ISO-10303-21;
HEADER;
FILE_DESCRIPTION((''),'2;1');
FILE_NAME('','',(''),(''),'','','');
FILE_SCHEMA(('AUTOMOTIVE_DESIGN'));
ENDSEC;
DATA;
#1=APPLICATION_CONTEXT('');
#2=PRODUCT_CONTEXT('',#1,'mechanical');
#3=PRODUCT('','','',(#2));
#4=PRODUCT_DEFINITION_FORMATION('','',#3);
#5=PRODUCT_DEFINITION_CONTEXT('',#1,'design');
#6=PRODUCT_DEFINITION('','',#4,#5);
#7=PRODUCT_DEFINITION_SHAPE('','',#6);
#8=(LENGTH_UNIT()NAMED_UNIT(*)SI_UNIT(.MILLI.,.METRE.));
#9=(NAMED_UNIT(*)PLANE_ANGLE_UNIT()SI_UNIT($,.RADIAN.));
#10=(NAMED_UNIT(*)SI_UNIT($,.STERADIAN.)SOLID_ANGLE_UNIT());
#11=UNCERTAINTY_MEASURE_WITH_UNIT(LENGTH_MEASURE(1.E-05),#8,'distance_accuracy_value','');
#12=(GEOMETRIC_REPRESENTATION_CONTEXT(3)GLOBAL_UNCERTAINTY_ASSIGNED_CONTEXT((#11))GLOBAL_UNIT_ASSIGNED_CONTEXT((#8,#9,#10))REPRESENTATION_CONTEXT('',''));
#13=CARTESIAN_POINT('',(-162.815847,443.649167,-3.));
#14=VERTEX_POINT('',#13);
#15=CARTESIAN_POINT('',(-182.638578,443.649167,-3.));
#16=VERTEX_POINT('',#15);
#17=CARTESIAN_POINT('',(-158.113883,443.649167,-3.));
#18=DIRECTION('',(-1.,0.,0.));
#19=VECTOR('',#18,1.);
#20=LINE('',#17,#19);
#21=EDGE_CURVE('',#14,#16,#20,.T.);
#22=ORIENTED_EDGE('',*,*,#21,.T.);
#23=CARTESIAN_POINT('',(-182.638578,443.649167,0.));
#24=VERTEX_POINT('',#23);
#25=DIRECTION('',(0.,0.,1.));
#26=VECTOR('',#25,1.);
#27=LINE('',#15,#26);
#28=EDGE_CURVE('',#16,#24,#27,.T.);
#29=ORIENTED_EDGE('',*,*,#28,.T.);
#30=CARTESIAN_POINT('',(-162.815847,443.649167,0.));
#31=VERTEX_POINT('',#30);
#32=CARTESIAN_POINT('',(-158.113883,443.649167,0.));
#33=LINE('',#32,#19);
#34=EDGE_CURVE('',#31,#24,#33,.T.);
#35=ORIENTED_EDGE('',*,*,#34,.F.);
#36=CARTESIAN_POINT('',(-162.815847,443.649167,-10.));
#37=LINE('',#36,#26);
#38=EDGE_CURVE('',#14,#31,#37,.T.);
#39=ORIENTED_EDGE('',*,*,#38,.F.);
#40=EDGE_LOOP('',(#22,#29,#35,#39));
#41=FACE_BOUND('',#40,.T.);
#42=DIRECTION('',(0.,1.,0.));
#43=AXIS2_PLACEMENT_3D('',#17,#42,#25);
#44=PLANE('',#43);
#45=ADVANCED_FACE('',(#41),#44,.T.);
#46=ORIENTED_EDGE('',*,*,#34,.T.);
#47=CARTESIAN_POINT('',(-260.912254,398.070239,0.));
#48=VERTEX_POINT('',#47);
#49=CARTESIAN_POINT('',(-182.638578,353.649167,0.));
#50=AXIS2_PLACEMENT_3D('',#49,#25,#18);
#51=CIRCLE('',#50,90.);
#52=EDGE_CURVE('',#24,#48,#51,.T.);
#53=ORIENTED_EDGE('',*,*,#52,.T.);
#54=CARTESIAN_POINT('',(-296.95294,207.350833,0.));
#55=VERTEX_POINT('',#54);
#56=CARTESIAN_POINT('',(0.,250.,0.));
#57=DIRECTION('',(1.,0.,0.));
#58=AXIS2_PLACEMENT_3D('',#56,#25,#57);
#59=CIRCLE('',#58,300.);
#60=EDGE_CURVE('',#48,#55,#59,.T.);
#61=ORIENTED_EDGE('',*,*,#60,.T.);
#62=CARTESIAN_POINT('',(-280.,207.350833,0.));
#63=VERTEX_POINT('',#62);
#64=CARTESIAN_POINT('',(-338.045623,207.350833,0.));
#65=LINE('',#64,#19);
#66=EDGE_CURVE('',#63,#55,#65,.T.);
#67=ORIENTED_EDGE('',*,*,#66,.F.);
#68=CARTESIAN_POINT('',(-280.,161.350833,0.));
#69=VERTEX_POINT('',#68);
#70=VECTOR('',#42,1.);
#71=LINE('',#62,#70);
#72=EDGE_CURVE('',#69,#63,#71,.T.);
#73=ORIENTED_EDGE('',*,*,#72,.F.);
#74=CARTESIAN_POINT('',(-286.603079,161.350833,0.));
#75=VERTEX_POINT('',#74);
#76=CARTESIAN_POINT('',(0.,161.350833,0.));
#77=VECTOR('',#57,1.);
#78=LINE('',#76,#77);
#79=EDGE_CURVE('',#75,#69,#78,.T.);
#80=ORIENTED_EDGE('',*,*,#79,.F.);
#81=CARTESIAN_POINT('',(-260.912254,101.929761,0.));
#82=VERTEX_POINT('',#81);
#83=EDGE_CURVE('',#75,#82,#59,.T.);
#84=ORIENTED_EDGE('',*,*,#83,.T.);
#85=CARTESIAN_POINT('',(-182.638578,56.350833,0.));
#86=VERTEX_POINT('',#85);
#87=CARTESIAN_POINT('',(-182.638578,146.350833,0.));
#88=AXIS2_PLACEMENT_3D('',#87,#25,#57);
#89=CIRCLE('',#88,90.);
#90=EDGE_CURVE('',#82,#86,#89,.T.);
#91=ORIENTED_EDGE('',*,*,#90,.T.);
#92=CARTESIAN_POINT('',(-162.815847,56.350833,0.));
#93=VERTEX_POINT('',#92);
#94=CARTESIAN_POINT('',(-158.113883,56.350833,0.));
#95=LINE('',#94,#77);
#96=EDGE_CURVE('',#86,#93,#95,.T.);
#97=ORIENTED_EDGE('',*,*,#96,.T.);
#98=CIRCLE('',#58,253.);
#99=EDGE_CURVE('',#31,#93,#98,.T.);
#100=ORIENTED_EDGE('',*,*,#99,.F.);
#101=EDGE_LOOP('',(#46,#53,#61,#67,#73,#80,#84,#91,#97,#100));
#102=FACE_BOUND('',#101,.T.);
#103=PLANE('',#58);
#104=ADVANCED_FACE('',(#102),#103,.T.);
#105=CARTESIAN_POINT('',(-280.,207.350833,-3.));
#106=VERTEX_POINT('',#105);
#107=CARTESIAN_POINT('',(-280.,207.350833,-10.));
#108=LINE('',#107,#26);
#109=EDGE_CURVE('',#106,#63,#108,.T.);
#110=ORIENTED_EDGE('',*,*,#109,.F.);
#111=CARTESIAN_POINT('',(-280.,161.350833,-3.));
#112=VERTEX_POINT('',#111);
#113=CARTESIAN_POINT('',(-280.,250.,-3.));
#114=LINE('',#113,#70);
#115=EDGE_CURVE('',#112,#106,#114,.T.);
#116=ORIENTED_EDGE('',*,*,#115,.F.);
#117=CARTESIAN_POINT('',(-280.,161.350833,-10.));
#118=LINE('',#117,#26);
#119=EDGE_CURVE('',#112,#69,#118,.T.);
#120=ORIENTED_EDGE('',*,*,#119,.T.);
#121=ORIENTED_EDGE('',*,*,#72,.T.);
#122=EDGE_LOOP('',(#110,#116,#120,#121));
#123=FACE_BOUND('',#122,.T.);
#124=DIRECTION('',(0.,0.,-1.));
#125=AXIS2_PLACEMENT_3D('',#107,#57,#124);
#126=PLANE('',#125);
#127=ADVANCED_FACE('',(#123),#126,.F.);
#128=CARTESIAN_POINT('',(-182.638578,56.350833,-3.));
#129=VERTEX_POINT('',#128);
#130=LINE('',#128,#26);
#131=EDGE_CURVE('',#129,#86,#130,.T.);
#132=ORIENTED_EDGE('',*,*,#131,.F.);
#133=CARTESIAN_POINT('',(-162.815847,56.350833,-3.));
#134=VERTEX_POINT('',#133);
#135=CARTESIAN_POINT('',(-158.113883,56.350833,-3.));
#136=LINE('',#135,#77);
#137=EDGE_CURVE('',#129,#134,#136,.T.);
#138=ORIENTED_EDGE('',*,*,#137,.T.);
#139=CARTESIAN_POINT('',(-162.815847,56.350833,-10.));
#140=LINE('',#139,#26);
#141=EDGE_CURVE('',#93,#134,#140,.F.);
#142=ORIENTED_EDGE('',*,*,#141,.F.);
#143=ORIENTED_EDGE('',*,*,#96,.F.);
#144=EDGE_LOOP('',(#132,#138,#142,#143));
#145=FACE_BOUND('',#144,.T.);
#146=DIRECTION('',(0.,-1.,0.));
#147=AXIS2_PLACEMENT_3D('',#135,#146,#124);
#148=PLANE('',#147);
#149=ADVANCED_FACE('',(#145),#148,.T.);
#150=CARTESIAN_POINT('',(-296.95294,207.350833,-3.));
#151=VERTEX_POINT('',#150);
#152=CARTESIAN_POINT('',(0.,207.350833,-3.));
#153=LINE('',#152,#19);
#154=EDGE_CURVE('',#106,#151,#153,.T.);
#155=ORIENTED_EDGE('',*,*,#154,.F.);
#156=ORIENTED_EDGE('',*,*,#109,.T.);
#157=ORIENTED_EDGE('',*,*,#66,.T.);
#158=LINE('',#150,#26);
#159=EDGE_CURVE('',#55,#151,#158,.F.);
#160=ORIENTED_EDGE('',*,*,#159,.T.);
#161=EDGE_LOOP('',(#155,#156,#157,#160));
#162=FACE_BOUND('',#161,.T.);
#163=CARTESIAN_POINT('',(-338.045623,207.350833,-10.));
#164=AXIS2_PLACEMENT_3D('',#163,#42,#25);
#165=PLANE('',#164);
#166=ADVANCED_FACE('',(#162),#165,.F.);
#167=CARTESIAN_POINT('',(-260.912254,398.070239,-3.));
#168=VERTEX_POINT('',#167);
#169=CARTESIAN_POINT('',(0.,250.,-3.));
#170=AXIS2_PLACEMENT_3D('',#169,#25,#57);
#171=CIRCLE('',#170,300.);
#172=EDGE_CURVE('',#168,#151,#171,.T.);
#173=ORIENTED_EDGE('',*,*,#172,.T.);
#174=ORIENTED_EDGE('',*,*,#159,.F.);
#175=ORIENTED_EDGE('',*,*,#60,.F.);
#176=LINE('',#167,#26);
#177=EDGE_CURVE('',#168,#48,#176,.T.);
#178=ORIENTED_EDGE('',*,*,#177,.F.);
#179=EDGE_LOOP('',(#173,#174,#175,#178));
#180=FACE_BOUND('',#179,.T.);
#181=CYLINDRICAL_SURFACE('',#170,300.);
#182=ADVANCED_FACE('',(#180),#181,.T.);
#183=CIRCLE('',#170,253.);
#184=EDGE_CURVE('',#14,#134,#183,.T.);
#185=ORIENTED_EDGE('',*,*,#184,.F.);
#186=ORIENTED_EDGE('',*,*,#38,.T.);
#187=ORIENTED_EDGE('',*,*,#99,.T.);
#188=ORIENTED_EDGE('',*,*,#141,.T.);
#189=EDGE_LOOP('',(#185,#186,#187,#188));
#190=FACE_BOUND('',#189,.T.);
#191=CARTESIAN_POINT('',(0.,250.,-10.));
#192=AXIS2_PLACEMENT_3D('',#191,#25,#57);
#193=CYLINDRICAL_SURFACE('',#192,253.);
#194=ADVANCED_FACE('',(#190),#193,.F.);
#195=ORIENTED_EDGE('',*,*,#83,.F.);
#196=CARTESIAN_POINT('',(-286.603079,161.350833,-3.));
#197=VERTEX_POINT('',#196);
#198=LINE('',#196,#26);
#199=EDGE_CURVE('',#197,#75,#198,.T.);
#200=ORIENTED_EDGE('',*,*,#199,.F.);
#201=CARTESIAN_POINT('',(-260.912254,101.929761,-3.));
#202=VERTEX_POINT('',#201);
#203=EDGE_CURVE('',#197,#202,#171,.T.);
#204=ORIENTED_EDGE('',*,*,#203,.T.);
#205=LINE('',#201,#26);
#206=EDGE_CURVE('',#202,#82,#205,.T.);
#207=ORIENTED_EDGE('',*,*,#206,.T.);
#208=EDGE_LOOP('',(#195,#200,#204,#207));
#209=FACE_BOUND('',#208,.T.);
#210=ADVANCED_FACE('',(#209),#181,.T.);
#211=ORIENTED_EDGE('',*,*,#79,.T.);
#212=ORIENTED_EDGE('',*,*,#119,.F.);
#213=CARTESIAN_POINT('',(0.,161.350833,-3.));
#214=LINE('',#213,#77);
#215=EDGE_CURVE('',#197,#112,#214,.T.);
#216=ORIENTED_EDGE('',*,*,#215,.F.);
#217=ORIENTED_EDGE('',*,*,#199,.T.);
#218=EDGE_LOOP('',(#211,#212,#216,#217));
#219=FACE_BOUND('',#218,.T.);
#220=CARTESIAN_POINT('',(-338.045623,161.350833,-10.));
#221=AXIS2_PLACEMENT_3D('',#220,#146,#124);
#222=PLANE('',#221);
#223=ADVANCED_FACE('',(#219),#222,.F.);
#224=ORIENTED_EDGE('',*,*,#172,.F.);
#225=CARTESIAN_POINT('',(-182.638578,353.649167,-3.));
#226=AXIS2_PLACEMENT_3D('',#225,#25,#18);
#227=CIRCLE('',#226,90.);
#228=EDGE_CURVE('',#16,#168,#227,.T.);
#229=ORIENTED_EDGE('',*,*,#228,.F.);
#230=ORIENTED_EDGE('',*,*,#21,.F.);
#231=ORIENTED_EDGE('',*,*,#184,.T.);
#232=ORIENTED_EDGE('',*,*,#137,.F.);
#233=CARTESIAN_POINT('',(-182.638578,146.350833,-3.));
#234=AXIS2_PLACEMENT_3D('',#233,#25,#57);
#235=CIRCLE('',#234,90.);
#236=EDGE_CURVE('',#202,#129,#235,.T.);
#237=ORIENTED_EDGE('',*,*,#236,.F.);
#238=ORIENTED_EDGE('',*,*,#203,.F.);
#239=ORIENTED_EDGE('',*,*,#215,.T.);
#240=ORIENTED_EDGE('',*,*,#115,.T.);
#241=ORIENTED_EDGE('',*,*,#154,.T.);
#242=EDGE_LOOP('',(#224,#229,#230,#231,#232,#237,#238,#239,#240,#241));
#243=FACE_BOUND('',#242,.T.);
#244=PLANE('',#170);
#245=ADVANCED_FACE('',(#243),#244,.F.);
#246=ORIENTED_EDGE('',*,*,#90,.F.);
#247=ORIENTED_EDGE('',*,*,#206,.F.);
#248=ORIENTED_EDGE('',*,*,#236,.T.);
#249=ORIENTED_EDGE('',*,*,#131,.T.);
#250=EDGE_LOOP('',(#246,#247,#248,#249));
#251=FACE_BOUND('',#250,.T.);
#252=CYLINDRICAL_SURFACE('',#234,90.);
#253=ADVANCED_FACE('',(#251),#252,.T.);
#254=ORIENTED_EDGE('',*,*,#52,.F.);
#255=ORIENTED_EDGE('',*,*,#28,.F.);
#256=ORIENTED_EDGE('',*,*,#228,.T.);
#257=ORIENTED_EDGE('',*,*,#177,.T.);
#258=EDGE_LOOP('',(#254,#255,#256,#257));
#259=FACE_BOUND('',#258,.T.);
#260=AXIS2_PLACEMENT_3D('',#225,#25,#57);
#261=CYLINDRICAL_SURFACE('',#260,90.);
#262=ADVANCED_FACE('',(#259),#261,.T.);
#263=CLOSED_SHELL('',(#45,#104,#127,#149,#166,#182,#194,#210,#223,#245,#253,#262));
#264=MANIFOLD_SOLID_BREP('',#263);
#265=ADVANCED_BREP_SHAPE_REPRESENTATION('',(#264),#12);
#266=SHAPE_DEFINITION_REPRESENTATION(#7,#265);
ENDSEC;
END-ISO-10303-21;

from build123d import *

# Parameters (mm, degrees)
FLANGE_BASE1_START    = -3
FLANGE_BASE1_DEPTH    = 3
ESBO_O2_W             = 58.045623223
ESBO_O2_H             = 46
CORTE_EXTRUS_O1_DEPTH = 10
CORTE_EXTRUS_O2_START = -10
CORTE_EXTRUS_O2_DEPTH = 10


# Read off the part's stored shape, not the designer's step: Flange-base1
with BuildPart() as part:
    # Flange-base1 outline → Flange-base1 (new body)
    with BuildSketch(Plane.XY.offset(FLANGE_BASE1_START)):
        with BuildLine():
            ThreePointArc((-158.113883008, 56.35083269), (-250, 250), (-158.113883008, 443.64916731))
            Line((-158.113883008, 443.64916731), (-182.638577841, 443.64916731))
            ThreePointArc((-182.638577841, 443.64916731), (-227.927116936, 431.424151892), (-260.912254059, 398.070239015))
            ThreePointArc((-260.912254059, 398.070239015), (-300, 250), (-260.912254059, 101.929760985))
            ThreePointArc((-260.912254059, 101.929760985), (-227.927116936, 68.575848108), (-182.638577841, 56.35083269))
            Line((-182.638577841, 56.35083269), (-158.113883008, 56.35083269))
        make_face()
    extrude(amount=FLANGE_BASE1_DEPTH)

    # Esboço2 → Corte-extrusão1 (cut)
    with BuildSketch(Plane.XY):
        with Locations((-309.022811612, 184.35083269)):
            Rectangle(ESBO_O2_W, ESBO_O2_H)
    extrude(amount=-CORTE_EXTRUS_O1_DEPTH, mode=Mode.SUBTRACT)

    # Esboço3 → Corte-extrusão2 (cut)
    with BuildSketch(Plane.XY.offset(CORTE_EXTRUS_O2_START)):
        with BuildLine():
            Line((-160.011249605, 445.972957318), (-158.113883008, 443.64916731))
            ThreePointArc((-158.113883008, 443.64916731), (-250, 250), (-158.113883008, 56.35083269))
            Line((-158.113883008, 56.35083269), (-160.011249605, 54.027042682))
            ThreePointArc((-160.011249605, 54.027042682), (-253, 250), (-160.011249605, 445.972957318))
        make_face()
    extrude(amount=CORTE_EXTRUS_O2_DEPTH, mode=Mode.SUBTRACT)


solid = part.part
